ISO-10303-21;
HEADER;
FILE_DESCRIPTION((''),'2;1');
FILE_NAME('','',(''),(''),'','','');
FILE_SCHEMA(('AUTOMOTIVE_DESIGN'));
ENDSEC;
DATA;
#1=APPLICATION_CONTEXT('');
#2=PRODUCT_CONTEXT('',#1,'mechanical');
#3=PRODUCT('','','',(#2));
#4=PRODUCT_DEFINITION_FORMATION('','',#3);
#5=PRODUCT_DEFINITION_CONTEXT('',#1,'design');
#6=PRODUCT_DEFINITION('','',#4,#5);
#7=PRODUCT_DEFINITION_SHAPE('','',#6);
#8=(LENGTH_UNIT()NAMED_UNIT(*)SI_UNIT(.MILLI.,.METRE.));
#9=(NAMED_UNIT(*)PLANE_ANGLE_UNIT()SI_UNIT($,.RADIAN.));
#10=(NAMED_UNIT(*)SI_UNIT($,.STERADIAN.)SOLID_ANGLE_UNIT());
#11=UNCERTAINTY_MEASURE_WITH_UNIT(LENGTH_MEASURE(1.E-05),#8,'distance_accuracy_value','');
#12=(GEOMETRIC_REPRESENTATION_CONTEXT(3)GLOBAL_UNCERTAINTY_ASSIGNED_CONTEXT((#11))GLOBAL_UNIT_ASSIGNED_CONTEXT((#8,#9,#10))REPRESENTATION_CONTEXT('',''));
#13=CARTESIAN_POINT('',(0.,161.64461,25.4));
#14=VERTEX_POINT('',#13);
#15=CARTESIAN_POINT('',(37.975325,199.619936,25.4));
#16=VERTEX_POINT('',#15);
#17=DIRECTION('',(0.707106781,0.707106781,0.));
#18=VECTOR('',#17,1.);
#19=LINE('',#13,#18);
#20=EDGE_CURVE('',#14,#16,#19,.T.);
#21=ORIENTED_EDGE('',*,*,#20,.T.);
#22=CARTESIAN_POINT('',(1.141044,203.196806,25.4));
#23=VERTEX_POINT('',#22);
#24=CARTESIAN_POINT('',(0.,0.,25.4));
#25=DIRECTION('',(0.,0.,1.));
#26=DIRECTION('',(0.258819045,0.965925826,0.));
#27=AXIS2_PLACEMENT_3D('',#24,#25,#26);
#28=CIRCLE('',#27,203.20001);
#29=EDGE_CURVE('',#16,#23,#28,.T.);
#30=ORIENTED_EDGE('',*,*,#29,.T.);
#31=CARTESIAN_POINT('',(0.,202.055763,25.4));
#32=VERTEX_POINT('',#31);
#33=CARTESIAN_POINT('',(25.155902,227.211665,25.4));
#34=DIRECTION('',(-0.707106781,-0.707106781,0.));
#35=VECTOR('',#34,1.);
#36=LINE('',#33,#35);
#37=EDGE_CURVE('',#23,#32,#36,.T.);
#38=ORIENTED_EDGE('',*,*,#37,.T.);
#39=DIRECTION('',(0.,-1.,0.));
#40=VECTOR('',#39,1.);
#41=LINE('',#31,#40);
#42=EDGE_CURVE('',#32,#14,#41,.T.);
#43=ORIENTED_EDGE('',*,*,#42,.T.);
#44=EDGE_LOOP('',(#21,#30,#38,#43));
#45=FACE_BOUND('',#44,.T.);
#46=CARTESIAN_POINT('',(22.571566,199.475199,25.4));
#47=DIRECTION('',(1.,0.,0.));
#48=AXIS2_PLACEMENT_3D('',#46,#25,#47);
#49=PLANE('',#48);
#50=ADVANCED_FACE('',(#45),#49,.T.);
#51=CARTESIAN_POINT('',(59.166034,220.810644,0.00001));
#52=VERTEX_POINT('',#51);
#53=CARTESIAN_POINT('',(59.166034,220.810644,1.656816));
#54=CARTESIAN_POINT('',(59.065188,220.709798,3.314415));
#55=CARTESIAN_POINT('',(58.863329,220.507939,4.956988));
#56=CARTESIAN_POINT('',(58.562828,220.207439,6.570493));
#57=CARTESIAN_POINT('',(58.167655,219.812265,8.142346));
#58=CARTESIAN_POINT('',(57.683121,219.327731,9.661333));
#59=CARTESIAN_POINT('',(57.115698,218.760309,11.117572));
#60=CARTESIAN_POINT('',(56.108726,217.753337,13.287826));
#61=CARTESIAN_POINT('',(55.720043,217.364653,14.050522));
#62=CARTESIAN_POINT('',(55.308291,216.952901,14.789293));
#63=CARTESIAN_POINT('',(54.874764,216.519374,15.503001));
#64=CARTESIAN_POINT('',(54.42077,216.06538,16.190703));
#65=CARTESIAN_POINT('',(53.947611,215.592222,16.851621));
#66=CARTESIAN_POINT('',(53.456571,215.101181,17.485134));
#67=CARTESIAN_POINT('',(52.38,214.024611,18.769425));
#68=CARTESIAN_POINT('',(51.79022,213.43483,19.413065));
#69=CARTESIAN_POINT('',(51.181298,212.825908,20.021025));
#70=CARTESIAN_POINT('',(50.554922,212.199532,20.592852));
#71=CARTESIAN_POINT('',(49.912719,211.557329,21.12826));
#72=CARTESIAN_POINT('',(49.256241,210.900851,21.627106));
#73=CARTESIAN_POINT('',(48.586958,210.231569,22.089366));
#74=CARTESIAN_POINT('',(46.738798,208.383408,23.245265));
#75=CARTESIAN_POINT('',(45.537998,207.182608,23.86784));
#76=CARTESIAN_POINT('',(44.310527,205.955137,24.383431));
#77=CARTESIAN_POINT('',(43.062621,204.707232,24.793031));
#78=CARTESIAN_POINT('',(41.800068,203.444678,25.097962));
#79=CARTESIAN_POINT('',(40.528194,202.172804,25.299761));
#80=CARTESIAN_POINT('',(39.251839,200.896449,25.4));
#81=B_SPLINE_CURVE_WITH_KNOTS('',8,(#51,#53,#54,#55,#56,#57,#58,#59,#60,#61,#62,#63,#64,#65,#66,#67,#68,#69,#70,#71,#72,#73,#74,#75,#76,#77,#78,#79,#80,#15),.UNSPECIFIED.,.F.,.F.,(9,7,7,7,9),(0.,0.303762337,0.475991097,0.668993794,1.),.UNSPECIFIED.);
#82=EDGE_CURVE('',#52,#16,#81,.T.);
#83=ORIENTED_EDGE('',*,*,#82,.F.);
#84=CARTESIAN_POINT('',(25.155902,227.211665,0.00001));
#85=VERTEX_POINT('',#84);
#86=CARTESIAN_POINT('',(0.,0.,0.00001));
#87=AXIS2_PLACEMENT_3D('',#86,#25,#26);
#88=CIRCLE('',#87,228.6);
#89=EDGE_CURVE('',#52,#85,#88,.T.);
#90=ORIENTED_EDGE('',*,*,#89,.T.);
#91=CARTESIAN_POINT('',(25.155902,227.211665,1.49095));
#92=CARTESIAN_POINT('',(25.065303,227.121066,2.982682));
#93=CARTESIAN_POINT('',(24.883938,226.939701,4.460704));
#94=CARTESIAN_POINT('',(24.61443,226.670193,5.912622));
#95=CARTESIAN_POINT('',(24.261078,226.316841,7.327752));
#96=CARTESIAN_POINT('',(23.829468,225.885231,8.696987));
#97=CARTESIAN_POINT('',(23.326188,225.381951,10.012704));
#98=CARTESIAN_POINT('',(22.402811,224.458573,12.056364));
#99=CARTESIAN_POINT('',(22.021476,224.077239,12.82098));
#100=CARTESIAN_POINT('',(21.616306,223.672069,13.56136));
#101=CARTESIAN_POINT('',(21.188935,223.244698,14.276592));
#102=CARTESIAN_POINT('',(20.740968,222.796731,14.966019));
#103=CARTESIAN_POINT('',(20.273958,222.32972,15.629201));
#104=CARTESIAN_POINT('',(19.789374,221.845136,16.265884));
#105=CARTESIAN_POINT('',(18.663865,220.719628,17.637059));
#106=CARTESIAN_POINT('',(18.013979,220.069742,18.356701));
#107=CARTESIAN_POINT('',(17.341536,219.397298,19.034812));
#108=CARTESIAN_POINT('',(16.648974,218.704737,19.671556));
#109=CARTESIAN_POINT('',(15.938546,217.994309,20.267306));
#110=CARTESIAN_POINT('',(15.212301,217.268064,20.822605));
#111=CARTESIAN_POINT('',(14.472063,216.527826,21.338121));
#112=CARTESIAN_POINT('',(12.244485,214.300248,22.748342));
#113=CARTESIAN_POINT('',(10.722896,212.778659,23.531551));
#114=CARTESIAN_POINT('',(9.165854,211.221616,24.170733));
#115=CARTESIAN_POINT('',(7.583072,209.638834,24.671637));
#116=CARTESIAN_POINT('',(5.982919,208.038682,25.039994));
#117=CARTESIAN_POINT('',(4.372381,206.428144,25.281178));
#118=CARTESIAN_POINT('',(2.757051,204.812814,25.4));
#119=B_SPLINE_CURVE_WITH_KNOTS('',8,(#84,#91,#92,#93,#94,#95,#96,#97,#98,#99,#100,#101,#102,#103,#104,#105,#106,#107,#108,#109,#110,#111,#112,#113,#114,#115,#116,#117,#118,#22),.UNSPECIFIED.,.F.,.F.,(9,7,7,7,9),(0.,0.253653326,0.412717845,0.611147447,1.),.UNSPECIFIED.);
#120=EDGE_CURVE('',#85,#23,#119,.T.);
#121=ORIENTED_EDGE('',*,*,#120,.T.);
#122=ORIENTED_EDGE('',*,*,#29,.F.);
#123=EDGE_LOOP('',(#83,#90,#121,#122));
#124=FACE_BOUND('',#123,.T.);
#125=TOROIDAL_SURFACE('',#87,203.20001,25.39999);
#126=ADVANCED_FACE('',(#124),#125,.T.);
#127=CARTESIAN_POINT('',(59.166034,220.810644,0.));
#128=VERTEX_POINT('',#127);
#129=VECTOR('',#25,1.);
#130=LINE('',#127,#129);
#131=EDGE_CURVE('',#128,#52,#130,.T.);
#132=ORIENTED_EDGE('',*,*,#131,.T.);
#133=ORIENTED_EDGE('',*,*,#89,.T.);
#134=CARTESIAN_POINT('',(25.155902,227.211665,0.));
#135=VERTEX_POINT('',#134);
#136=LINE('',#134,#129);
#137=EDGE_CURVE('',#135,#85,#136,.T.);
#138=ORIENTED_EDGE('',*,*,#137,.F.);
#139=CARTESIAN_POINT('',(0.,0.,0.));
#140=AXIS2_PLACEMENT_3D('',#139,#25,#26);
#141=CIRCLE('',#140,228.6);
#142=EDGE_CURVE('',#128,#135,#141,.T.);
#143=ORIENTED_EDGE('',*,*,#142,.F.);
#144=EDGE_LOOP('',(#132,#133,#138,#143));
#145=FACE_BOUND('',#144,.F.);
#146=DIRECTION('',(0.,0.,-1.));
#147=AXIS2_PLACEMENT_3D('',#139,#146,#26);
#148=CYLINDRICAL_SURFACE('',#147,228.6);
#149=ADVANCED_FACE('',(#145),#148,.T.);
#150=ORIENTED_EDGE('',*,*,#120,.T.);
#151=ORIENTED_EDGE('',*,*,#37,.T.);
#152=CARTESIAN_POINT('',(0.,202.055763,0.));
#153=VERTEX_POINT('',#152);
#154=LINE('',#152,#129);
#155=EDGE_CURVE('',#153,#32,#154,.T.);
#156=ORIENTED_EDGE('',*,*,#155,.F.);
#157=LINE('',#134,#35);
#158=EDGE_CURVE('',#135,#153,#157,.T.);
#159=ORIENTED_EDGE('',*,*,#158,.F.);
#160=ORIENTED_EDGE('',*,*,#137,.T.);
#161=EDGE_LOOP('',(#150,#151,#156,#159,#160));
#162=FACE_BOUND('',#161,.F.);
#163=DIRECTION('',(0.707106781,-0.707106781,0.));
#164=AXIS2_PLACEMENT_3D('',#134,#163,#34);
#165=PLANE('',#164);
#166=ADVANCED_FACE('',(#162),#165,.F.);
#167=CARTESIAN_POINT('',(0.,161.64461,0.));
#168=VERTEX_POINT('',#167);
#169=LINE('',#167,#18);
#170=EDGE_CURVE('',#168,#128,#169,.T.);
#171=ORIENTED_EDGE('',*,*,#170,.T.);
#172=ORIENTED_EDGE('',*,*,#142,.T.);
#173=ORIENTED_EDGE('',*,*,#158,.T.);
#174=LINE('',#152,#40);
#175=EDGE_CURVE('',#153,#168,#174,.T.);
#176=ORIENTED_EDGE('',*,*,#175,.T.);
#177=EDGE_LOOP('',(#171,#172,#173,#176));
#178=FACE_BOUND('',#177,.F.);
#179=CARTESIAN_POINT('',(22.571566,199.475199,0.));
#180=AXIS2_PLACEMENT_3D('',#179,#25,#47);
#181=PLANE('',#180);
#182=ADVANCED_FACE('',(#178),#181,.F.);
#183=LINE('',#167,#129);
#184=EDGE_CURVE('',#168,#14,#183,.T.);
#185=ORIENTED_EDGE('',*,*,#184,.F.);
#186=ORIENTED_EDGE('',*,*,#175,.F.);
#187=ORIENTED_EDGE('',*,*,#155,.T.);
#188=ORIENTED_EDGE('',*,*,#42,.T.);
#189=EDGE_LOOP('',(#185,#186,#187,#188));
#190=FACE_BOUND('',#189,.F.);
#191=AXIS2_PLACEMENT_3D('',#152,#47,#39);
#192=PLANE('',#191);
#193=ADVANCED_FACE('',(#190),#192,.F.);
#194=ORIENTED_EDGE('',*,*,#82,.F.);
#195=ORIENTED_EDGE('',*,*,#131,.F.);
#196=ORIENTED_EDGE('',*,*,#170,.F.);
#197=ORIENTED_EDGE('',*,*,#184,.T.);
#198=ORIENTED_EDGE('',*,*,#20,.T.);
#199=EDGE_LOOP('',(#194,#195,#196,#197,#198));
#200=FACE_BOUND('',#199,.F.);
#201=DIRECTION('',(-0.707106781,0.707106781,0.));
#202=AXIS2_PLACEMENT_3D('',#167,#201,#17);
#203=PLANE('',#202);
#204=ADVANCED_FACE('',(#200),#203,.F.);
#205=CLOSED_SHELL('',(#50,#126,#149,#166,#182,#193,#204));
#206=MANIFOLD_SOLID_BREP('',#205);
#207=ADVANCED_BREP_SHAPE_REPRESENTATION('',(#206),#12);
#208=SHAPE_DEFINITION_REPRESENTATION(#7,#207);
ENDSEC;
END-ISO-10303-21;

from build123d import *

# Parameters (mm, degrees)
F2_DEPTH = 25.4
F3_R     = 25.39999


# Not quite as in the source:
# - a fillet or chamfer is up to 0.001 mm smaller than in the source, because OpenCascade refuses the exact size


with BuildPart() as f2:
    # F1 (on face) → F2 (new body)
    with BuildSketch(Plane.XY):
        with BuildLine():
            Line((25.1559020156, 227.2116647397), (0, 202.0557627241))
            Line((0, 202.0557627241), (0, 161.6446101792))
            Line((0, 161.6446101792), (59.1660337104, 220.8106438897))
            ThreePointArc((59.1660337104, 220.8106438897), (42.28227144, 224.6556687953), (25.1559020156, 227.2116647397))
        make_face()
    extrude(amount=F2_DEPTH)

    # F3 (radius 25.4 in the source; OpenCascade refuses exactly that, so slightly less here)
    f3_edges = [f2.edges().sort_by_distance(p)[0] for p in [
        (42.282271, 224.655669, 25.4),
    ]]
    fillet(f3_edges, radius=F3_R)


solid = f2.part
